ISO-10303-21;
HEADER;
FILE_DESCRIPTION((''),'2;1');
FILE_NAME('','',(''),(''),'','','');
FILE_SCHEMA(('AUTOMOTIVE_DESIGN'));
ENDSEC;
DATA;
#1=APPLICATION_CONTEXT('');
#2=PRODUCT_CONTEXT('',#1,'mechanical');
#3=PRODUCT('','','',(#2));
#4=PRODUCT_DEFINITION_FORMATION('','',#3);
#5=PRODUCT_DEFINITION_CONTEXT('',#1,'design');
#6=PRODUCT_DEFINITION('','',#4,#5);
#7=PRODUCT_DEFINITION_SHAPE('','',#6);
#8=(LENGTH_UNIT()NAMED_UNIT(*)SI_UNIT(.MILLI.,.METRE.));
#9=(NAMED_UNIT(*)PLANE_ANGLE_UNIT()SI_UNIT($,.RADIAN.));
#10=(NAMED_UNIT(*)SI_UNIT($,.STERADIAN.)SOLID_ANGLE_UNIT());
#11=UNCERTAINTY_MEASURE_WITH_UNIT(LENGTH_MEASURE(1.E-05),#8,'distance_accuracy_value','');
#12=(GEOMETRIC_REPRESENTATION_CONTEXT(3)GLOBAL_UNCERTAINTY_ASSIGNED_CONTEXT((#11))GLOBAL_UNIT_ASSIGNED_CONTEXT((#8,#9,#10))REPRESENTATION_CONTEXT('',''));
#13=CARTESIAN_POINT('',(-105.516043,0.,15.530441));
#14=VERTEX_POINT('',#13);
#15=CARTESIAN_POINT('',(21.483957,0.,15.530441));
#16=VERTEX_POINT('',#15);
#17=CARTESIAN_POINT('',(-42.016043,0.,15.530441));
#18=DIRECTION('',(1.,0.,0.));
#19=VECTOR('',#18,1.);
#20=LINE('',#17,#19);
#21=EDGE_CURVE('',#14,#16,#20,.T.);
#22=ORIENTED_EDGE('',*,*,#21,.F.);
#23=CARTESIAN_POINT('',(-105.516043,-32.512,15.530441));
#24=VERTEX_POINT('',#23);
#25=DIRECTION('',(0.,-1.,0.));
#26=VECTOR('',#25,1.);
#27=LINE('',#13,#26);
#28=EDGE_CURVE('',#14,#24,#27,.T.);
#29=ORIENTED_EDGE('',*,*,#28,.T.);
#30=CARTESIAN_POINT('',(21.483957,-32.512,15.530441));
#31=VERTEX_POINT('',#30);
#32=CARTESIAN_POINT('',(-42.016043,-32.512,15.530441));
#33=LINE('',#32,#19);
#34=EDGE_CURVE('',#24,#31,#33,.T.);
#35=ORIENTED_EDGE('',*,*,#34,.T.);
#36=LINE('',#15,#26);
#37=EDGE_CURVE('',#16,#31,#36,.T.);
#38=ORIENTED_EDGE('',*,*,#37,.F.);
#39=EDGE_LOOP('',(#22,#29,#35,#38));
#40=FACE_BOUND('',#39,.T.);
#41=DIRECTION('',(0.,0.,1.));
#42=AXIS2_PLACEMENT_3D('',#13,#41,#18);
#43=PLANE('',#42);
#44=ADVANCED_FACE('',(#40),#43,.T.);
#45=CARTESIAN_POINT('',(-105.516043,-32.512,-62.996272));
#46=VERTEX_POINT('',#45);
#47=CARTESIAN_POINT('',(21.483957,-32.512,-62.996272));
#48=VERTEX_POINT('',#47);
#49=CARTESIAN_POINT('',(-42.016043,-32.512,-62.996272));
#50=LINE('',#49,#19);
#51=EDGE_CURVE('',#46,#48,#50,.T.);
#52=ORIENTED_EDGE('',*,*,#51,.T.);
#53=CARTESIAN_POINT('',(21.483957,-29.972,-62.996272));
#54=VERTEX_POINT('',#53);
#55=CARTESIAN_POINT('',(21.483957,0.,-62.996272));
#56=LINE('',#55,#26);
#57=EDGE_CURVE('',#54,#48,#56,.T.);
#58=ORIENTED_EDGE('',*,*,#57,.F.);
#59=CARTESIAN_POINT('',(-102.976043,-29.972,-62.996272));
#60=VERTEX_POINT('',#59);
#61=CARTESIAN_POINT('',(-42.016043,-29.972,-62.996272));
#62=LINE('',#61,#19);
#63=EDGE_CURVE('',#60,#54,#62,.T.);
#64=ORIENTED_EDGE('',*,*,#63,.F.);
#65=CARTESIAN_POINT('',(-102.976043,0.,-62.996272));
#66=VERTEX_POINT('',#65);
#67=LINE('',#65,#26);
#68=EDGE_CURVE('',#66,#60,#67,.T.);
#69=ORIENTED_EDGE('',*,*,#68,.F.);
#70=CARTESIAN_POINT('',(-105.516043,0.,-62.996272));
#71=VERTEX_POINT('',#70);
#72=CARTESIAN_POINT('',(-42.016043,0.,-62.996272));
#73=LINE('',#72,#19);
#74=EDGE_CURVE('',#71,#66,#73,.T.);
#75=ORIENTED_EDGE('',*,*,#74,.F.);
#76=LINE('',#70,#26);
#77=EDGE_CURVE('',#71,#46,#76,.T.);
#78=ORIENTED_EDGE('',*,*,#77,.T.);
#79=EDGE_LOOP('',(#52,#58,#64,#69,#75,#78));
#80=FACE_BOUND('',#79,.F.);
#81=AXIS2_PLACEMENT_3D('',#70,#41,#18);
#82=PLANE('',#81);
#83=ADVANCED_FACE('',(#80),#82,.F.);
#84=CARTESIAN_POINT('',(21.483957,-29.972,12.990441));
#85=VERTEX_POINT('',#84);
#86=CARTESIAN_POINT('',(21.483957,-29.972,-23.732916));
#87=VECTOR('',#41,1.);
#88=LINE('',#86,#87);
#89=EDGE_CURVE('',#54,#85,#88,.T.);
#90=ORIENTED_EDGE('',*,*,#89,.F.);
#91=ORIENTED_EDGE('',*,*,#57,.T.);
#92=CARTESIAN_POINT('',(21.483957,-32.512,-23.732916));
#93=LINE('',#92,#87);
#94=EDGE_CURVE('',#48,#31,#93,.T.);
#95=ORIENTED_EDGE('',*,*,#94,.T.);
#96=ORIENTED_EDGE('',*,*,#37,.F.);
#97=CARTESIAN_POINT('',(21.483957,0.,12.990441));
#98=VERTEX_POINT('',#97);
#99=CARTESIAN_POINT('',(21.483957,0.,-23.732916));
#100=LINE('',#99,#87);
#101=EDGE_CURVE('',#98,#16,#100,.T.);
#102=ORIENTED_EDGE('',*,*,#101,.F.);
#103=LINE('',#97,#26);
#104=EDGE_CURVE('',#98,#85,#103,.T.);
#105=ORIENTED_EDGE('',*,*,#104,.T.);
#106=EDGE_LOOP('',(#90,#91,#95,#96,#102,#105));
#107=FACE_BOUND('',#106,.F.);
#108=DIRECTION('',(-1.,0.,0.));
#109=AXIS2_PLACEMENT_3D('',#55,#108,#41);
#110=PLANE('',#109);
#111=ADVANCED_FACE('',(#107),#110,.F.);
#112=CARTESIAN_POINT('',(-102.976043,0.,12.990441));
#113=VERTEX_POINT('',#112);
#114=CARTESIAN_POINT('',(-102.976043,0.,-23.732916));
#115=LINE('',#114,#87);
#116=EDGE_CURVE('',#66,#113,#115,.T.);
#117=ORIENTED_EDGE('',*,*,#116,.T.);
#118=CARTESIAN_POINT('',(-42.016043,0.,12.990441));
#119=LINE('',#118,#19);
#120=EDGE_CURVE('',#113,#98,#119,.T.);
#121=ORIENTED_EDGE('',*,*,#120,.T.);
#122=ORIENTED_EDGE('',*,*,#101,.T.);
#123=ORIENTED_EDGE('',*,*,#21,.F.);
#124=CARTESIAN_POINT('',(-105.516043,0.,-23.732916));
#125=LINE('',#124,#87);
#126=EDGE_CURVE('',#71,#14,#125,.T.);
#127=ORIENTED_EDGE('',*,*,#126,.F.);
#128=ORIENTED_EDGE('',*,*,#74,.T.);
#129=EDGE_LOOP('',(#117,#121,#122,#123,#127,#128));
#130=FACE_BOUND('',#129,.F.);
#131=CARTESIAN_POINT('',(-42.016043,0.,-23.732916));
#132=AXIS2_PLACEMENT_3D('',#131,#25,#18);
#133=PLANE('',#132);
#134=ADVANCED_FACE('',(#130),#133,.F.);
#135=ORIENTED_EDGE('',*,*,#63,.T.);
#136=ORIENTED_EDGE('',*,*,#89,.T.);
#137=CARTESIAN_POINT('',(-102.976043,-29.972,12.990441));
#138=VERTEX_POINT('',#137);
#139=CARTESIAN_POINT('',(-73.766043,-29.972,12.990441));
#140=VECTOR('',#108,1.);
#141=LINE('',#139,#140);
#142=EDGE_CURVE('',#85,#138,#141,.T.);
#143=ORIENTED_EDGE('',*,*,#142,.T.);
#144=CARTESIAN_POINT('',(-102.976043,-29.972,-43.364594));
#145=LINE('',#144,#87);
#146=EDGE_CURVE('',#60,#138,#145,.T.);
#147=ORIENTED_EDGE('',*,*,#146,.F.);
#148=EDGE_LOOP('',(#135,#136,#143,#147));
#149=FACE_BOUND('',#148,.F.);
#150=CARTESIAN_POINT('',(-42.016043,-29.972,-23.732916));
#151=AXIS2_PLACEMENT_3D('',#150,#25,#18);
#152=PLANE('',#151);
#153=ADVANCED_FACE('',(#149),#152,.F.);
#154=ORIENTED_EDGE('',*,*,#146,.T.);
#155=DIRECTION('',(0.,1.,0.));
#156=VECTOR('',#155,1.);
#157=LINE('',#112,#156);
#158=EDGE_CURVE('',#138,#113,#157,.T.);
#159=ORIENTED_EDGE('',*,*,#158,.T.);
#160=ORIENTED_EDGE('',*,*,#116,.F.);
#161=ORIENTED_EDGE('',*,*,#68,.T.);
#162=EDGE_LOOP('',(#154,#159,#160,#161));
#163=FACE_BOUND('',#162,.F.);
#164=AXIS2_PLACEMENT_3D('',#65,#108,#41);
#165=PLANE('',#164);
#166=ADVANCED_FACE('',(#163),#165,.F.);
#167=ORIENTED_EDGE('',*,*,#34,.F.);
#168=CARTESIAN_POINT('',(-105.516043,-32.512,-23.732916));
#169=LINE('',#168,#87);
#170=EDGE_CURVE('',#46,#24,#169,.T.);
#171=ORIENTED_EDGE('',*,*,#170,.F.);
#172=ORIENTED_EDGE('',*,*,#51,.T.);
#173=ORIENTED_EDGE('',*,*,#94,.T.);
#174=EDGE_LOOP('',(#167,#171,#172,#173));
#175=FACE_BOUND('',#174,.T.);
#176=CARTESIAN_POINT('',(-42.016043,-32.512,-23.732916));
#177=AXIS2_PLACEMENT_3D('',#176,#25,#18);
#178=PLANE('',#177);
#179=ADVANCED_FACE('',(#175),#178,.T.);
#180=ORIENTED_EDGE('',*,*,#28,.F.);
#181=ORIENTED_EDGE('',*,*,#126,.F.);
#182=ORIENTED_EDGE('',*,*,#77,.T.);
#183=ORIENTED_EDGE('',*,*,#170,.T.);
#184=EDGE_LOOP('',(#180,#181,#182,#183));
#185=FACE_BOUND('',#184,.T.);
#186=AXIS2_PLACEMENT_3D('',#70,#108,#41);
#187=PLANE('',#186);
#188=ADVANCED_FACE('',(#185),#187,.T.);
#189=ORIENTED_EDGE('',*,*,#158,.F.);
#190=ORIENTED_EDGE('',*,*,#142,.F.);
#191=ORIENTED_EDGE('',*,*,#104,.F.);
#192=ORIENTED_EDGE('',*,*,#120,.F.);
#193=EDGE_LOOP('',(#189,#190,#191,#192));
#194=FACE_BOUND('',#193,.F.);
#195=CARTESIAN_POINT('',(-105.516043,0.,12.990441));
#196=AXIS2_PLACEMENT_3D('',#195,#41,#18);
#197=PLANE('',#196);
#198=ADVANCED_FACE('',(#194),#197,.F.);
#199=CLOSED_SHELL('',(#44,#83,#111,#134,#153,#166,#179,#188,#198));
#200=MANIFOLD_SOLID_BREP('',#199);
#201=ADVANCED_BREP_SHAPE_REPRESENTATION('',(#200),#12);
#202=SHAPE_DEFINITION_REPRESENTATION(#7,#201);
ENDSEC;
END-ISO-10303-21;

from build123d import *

# Parameters (mm, degrees)
F0_W     = 127
F0_H     = 78.5267129702
F1_DEPTH = 32.512
F2_T     = -2.54


# Not quite as in the source:
# - a feature of the source that left no trace in its solid (it failed there, or was rolled back) is left out


with BuildPart() as f1:
    # F0 (on Front) → F1 (new body)
    with BuildSketch(Plane.XZ):
        with Locations((-42.0160433277, -23.7329155207)):
            Rectangle(F0_W, F0_H)
    extrude(amount=F1_DEPTH)

    # F2
    f2_openings = [f1.faces().sort_by_distance(p)[0] for p in [
        (21.483957, -16.256, -23.732916),
        (-42.016043, -16.256, -62.996272),
        (-42.016043, 0, -23.732916),
    ]]
    offset(amount=F2_T, openings=f2_openings)


solid = f1.part
